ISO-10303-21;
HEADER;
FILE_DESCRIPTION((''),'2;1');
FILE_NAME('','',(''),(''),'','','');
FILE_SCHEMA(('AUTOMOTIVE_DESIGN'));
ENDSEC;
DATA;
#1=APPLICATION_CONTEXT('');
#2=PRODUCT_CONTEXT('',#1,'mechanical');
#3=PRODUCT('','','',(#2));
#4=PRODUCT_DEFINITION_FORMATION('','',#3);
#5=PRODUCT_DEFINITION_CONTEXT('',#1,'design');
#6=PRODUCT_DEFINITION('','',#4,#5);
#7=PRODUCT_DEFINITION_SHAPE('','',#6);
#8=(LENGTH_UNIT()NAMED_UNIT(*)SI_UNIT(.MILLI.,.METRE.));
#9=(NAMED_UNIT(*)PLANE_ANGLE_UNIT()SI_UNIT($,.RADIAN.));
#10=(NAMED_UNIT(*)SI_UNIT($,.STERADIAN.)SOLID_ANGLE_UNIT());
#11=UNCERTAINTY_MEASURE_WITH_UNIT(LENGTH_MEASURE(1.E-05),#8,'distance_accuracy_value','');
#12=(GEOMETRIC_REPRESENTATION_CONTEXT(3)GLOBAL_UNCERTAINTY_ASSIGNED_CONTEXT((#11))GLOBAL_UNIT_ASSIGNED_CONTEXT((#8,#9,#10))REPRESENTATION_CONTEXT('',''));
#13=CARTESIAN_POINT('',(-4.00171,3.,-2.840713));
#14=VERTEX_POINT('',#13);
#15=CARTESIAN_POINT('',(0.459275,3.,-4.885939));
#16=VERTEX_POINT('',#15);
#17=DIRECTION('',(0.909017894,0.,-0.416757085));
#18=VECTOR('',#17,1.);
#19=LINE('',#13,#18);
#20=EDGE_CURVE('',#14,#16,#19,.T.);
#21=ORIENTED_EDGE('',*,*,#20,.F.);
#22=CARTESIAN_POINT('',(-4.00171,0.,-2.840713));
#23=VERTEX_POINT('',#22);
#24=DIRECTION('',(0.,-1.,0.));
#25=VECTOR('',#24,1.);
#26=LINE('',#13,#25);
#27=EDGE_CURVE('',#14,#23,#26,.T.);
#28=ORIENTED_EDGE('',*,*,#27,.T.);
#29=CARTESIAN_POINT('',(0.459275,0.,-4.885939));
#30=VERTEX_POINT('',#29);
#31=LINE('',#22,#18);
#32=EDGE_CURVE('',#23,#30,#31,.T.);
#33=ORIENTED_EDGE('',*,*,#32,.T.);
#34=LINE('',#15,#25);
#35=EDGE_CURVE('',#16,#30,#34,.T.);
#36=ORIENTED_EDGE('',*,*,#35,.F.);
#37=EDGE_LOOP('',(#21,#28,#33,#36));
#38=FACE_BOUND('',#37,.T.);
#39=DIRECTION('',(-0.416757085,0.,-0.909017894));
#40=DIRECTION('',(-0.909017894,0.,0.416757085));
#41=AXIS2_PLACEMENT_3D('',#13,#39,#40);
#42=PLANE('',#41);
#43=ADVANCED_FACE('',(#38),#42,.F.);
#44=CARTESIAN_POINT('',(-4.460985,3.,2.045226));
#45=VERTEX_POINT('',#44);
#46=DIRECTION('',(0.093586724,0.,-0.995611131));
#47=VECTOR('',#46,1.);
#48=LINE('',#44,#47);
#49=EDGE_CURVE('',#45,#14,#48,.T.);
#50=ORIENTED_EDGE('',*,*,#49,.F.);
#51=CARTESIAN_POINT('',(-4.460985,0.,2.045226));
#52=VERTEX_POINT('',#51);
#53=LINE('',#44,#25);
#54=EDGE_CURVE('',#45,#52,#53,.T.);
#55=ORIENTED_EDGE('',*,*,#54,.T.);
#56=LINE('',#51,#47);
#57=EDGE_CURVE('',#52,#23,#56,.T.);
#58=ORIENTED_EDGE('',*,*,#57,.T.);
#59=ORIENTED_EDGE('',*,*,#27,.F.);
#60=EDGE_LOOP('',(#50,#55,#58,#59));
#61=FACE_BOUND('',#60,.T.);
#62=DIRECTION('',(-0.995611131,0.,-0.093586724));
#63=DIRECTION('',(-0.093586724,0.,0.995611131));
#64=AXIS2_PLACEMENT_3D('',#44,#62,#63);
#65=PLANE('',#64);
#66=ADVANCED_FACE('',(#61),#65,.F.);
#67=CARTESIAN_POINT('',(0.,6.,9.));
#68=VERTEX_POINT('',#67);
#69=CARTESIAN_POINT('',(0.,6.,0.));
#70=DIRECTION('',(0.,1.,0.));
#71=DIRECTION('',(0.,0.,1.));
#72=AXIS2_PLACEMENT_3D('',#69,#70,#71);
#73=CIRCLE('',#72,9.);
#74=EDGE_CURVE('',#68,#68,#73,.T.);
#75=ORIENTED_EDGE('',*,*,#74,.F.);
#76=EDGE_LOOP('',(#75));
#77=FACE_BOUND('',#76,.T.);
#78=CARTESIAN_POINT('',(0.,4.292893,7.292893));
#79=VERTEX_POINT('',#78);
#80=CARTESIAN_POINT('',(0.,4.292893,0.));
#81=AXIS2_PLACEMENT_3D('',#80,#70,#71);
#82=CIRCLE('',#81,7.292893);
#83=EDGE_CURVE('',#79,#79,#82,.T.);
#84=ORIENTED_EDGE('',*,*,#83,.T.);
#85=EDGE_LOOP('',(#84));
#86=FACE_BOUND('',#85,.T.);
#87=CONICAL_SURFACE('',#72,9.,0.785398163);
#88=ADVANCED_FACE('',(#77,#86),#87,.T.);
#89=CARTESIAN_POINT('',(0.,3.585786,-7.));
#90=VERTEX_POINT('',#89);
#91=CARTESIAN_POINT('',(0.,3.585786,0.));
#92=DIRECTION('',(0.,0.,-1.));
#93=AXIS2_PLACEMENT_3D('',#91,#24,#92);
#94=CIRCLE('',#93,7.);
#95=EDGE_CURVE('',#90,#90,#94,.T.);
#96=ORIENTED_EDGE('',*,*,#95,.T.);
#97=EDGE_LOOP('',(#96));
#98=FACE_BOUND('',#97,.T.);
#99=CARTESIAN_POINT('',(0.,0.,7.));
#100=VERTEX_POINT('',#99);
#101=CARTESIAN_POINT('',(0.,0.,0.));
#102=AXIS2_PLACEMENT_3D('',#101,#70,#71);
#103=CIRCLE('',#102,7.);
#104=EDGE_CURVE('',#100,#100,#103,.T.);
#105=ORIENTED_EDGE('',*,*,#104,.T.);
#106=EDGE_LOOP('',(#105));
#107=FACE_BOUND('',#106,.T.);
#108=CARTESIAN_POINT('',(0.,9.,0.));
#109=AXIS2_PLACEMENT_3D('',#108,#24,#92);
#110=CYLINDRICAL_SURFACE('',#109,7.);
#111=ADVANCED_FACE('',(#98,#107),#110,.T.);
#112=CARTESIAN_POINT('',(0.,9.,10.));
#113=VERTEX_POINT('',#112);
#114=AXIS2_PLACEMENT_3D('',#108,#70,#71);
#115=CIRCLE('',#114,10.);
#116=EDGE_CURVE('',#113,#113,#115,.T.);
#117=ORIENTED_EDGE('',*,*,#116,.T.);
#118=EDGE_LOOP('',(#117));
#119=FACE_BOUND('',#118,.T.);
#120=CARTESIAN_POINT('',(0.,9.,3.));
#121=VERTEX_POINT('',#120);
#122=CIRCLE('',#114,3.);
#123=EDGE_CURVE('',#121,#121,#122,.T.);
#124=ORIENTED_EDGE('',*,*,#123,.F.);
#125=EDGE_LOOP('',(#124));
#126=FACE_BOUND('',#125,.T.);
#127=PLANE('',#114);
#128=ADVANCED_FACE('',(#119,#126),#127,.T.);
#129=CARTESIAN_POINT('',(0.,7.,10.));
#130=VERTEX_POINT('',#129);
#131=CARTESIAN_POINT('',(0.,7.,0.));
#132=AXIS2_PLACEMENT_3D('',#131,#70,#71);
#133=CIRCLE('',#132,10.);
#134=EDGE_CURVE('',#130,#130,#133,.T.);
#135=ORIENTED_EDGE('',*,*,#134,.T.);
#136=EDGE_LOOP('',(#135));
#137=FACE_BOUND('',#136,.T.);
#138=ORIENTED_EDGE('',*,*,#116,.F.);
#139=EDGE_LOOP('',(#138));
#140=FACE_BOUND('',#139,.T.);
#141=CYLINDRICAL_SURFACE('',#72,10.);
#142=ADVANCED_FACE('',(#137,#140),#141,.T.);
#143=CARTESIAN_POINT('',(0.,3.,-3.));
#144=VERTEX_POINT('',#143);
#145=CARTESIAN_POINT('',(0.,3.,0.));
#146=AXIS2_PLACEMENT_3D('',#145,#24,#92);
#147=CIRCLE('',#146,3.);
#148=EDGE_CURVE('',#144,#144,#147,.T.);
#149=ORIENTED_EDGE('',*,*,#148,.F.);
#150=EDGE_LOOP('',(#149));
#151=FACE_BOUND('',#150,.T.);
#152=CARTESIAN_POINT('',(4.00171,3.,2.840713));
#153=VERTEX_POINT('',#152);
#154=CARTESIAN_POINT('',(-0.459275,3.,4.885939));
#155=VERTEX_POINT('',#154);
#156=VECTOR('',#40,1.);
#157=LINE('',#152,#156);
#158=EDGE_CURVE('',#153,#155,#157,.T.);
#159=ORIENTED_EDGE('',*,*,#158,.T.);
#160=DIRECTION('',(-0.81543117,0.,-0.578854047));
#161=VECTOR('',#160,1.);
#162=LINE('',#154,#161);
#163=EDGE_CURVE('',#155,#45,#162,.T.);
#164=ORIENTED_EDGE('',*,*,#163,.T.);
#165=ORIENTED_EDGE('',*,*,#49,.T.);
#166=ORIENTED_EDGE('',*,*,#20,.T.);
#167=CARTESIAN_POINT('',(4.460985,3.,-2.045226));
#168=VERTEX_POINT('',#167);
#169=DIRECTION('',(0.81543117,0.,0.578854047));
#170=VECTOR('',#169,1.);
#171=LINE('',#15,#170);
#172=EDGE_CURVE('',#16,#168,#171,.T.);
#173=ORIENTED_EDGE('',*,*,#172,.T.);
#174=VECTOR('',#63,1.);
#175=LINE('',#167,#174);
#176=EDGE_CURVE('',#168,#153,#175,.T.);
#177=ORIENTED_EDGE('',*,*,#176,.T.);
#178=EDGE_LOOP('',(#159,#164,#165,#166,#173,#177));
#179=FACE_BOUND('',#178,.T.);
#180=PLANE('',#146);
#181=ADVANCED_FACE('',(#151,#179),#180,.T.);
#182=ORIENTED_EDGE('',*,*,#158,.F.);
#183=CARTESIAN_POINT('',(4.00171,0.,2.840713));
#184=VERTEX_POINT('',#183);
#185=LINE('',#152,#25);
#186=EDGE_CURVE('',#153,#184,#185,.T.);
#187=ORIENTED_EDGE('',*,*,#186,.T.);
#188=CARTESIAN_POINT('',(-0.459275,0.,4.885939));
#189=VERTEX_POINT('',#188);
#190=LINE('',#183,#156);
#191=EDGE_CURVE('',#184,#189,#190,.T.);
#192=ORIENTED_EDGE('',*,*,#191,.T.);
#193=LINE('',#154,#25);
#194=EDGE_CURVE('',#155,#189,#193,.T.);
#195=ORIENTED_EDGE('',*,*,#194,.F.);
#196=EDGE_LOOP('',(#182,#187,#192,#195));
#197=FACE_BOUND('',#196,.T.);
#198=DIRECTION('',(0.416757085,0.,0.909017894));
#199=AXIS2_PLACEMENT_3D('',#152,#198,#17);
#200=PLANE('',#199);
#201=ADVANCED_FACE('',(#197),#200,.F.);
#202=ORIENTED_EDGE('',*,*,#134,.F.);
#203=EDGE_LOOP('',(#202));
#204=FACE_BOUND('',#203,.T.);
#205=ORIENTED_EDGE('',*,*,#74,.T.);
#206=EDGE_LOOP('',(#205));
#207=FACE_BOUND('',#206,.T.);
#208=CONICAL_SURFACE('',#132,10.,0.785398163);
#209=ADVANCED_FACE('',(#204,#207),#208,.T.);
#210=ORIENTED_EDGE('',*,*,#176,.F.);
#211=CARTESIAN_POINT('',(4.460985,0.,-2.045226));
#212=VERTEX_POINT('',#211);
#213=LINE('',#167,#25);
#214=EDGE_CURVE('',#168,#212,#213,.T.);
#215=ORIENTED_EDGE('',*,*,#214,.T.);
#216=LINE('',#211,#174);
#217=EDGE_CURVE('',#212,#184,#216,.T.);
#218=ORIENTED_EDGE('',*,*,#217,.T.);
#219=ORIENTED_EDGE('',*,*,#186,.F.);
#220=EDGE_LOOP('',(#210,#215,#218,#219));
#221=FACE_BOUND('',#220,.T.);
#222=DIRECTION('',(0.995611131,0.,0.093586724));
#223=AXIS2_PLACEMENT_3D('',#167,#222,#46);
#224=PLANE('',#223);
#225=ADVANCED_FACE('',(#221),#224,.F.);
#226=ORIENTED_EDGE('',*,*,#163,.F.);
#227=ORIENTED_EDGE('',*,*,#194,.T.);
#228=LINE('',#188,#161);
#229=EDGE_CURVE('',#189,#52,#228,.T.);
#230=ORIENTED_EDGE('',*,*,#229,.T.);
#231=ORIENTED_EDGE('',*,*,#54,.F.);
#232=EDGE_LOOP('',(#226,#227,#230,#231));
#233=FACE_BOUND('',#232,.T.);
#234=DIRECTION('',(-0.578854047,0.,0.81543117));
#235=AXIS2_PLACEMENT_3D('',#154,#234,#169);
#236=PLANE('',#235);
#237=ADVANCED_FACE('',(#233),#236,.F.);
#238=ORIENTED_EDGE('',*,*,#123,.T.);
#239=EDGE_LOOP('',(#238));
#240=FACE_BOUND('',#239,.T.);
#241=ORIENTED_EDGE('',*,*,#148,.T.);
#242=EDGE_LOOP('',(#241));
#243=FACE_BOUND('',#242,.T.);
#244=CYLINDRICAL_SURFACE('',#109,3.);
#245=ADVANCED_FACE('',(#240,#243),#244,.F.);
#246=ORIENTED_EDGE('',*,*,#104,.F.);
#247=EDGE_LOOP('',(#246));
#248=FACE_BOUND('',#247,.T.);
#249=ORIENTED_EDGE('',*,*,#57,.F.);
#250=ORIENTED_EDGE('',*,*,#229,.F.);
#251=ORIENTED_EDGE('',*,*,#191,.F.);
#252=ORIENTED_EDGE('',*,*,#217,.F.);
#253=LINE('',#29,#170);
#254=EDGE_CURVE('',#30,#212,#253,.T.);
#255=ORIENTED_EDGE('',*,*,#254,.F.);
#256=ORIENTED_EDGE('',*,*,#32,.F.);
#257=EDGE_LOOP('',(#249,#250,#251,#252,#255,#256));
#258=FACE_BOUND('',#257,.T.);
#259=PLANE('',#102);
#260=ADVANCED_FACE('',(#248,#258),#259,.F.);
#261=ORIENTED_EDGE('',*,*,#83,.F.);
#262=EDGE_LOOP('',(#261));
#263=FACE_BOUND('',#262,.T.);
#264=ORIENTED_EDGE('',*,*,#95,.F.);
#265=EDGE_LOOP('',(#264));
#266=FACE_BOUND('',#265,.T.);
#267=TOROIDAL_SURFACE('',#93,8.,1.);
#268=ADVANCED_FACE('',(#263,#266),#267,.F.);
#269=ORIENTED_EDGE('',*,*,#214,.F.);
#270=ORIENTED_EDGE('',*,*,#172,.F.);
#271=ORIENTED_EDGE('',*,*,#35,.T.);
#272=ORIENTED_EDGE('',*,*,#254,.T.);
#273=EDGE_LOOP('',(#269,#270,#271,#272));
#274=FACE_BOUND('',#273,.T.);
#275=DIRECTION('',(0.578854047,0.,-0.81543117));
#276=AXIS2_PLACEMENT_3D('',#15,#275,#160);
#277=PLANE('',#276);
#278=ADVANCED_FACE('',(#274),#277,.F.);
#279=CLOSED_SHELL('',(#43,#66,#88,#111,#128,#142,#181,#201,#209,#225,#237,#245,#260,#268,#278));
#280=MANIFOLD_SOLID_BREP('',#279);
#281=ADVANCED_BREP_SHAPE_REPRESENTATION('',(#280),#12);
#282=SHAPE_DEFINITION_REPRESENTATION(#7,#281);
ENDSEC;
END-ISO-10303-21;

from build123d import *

# Parameters (mm, degrees)
SKETCH1_R           = 7
SKETCH1_R_2         = 3
BOSS_EXTRUDE1_DEPTH = 9
BOSS_EXTRUDE2_START = -3
SKETCH2_R           = 10
SKETCH2_R_2         = 3
BOSS_EXTRUDE2_DEPTH = 3
CUT_EXTRUDE1_DEPTH  = 3
CHAMFER1_SIZE       = 2
CHAMFER2_SIZE       = 1
FILLET1_R           = 1


with BuildPart() as part:
    # Sketch1 → Boss-Extrude1 (new body)
    with BuildSketch(Plane(origin=(0, 0, 0), x_dir=(1, 0, 0), z_dir=(0, 1, 0))):
        with Locations(Location((0, 0, 0), (0, 0, 270))):
            Circle(SKETCH1_R)
        with Locations(Location((0, 0, 0), (0, 0, 270))):
            Circle(SKETCH1_R_2, mode=Mode.SUBTRACT)
    extrude(amount=BOSS_EXTRUDE1_DEPTH)

    # Sketch2 → Boss-Extrude2 (add)
    with BuildSketch(Plane(origin=(0, 9, 0), x_dir=(1, 0, 0), z_dir=(0, 1, 0)).offset(BOSS_EXTRUDE2_START)):
        with Locations(Location((0, 0, 0), (0, 0, 270))):
            Circle(SKETCH2_R)
        with Locations(Location((0, 0, 0), (0, 0, 270))):
            Circle(SKETCH2_R_2, mode=Mode.SUBTRACT)
    extrude(amount=BOSS_EXTRUDE2_DEPTH)

    # Sketch3 → Cut-Extrude1 (cut)
    with BuildSketch(Plane.XZ):
        Polygon((-4.001709946, -2.840713087), (0.459274725, -4.885939015), (4.460984671, -2.045225929), (4.001709946, 2.840713087), (-0.459274725, 4.885939015), (-4.460984671, 2.045225929), align=None)
    extrude(amount=-CUT_EXTRUDE1_DEPTH, mode=Mode.SUBTRACT)

    # Chamfer1
    chamfer1_edges = [part.edges().sort_by_distance(p)[0] for p in [
        (0, 6, -7),
    ]]
    chamfer(chamfer1_edges, length=CHAMFER1_SIZE)

    # Chamfer2
    chamfer2_edges = [part.edges().sort_by_distance(p)[0] for p in [
        (0, 6, -10),
    ]]
    chamfer(chamfer2_edges, length=CHAMFER2_SIZE - 0.0001)  # a hair under: the kernel refuses the full size

    # Fillet1
    fillet1_edges = [part.edges().sort_by_distance(p)[0] for p in [
        (0, 4, -7),
    ]]
    fillet(fillet1_edges, radius=FILLET1_R)


solid = part.part
